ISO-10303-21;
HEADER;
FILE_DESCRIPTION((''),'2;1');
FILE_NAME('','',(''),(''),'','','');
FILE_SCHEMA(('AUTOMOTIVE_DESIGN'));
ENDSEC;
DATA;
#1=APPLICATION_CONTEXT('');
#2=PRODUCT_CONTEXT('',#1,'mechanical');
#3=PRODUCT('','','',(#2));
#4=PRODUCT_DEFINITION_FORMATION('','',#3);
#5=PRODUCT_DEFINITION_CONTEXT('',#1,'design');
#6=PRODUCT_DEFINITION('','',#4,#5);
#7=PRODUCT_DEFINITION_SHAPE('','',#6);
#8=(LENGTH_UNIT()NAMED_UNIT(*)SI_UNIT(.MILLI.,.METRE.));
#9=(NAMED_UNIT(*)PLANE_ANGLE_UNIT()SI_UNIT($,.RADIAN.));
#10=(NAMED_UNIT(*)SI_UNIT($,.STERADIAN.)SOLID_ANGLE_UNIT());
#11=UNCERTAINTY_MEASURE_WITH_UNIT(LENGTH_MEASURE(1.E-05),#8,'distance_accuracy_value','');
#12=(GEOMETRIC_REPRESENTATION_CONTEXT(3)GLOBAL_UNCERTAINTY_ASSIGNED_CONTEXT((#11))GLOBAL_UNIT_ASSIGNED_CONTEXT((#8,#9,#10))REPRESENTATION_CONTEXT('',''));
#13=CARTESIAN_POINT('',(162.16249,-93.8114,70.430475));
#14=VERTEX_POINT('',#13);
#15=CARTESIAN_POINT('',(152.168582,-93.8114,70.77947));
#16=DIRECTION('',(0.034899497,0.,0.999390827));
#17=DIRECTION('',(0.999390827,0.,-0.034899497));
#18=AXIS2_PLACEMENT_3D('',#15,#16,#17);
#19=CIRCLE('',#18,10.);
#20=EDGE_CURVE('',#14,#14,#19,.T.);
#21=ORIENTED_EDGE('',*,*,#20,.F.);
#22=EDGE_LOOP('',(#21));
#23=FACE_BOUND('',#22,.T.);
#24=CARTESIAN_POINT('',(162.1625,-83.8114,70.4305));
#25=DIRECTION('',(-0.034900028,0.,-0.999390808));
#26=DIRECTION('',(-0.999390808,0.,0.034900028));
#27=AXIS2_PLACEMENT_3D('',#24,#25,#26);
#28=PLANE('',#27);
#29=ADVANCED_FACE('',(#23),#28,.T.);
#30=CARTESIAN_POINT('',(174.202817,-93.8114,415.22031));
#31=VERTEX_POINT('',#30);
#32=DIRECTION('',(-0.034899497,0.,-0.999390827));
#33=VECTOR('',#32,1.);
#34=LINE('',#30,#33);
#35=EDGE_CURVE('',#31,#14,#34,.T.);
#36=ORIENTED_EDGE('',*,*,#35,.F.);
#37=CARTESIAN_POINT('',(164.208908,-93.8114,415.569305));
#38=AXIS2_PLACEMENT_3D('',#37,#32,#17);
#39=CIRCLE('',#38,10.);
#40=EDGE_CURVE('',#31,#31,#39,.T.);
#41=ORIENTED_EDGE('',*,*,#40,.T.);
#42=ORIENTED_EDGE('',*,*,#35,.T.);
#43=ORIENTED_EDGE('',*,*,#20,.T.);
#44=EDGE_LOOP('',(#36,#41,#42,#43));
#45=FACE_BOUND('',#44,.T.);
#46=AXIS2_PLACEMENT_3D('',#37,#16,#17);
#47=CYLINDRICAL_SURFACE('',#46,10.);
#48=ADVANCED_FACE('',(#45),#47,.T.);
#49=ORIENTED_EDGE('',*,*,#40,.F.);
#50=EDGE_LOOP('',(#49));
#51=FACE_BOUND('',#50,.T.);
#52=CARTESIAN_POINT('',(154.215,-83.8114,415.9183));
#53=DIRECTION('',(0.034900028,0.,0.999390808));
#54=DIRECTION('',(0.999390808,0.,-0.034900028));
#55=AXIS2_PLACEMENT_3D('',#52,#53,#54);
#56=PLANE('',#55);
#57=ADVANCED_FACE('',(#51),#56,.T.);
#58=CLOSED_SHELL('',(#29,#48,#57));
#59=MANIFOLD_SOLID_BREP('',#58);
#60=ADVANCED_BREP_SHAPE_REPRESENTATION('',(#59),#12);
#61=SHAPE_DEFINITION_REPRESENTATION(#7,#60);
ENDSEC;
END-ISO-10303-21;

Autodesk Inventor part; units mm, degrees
ref_plane "YZ Plane" through (0, 0, 0) normal (1, 0, 0) x (0, 1, 0)
ref_plane "XZ Plane" through (0, 0, 0) normal (0, 1, 0) x (-1, 0, 0)
ref_plane "XY Plane" through (0, 0, 0) normal (0, 0, 1) x (1, 0, 0)
ref_plane "Work Plane1" through (164.2028, -83.8114, 405.2203) normal (0, -1, 0) x (0, 0, 1)
sketch "Sketch1" plane through (164.2028, -83.8114, 405.2203) normal (0, -1, 0) x (0, 0, 1)
  line L0 (10, -10) -> (-334.7898, 2.0403)
  line L1 (-334.7898, 2.0403) -> (-334.0918, 22.0281)
  line L2 (-334.0918, 22.0281) -> (10.698, 9.9878)
  line L3 (10.698, 9.9878) -> (10, -10)
  line L4 (10, -10) -> (355, -10) construction
  point P0 (-405.2203, 164.2028)
  dimension "d0" = 345
  dimension "d1" = 178
  dimension "d2" = 20
extrude "Extrusion1" add sketch "Sketch1" along normal blind 20
sketch "Sketch2" plane through (154.215, -103.8114, 415.9183) normal (0.0348995, 0, 0.9993908) x (0.9993908, 0, -0.0348995)
  circle A0 centre (10, 10) radius 10
  line L0 (20, 20) -> (0, 20) projected
  point P0 (-139.6057, 103.8114)
extrude "Extrusion2" cut sketch "Sketch2" against normal blind 345 keep common part
properties part number "trail 15"
